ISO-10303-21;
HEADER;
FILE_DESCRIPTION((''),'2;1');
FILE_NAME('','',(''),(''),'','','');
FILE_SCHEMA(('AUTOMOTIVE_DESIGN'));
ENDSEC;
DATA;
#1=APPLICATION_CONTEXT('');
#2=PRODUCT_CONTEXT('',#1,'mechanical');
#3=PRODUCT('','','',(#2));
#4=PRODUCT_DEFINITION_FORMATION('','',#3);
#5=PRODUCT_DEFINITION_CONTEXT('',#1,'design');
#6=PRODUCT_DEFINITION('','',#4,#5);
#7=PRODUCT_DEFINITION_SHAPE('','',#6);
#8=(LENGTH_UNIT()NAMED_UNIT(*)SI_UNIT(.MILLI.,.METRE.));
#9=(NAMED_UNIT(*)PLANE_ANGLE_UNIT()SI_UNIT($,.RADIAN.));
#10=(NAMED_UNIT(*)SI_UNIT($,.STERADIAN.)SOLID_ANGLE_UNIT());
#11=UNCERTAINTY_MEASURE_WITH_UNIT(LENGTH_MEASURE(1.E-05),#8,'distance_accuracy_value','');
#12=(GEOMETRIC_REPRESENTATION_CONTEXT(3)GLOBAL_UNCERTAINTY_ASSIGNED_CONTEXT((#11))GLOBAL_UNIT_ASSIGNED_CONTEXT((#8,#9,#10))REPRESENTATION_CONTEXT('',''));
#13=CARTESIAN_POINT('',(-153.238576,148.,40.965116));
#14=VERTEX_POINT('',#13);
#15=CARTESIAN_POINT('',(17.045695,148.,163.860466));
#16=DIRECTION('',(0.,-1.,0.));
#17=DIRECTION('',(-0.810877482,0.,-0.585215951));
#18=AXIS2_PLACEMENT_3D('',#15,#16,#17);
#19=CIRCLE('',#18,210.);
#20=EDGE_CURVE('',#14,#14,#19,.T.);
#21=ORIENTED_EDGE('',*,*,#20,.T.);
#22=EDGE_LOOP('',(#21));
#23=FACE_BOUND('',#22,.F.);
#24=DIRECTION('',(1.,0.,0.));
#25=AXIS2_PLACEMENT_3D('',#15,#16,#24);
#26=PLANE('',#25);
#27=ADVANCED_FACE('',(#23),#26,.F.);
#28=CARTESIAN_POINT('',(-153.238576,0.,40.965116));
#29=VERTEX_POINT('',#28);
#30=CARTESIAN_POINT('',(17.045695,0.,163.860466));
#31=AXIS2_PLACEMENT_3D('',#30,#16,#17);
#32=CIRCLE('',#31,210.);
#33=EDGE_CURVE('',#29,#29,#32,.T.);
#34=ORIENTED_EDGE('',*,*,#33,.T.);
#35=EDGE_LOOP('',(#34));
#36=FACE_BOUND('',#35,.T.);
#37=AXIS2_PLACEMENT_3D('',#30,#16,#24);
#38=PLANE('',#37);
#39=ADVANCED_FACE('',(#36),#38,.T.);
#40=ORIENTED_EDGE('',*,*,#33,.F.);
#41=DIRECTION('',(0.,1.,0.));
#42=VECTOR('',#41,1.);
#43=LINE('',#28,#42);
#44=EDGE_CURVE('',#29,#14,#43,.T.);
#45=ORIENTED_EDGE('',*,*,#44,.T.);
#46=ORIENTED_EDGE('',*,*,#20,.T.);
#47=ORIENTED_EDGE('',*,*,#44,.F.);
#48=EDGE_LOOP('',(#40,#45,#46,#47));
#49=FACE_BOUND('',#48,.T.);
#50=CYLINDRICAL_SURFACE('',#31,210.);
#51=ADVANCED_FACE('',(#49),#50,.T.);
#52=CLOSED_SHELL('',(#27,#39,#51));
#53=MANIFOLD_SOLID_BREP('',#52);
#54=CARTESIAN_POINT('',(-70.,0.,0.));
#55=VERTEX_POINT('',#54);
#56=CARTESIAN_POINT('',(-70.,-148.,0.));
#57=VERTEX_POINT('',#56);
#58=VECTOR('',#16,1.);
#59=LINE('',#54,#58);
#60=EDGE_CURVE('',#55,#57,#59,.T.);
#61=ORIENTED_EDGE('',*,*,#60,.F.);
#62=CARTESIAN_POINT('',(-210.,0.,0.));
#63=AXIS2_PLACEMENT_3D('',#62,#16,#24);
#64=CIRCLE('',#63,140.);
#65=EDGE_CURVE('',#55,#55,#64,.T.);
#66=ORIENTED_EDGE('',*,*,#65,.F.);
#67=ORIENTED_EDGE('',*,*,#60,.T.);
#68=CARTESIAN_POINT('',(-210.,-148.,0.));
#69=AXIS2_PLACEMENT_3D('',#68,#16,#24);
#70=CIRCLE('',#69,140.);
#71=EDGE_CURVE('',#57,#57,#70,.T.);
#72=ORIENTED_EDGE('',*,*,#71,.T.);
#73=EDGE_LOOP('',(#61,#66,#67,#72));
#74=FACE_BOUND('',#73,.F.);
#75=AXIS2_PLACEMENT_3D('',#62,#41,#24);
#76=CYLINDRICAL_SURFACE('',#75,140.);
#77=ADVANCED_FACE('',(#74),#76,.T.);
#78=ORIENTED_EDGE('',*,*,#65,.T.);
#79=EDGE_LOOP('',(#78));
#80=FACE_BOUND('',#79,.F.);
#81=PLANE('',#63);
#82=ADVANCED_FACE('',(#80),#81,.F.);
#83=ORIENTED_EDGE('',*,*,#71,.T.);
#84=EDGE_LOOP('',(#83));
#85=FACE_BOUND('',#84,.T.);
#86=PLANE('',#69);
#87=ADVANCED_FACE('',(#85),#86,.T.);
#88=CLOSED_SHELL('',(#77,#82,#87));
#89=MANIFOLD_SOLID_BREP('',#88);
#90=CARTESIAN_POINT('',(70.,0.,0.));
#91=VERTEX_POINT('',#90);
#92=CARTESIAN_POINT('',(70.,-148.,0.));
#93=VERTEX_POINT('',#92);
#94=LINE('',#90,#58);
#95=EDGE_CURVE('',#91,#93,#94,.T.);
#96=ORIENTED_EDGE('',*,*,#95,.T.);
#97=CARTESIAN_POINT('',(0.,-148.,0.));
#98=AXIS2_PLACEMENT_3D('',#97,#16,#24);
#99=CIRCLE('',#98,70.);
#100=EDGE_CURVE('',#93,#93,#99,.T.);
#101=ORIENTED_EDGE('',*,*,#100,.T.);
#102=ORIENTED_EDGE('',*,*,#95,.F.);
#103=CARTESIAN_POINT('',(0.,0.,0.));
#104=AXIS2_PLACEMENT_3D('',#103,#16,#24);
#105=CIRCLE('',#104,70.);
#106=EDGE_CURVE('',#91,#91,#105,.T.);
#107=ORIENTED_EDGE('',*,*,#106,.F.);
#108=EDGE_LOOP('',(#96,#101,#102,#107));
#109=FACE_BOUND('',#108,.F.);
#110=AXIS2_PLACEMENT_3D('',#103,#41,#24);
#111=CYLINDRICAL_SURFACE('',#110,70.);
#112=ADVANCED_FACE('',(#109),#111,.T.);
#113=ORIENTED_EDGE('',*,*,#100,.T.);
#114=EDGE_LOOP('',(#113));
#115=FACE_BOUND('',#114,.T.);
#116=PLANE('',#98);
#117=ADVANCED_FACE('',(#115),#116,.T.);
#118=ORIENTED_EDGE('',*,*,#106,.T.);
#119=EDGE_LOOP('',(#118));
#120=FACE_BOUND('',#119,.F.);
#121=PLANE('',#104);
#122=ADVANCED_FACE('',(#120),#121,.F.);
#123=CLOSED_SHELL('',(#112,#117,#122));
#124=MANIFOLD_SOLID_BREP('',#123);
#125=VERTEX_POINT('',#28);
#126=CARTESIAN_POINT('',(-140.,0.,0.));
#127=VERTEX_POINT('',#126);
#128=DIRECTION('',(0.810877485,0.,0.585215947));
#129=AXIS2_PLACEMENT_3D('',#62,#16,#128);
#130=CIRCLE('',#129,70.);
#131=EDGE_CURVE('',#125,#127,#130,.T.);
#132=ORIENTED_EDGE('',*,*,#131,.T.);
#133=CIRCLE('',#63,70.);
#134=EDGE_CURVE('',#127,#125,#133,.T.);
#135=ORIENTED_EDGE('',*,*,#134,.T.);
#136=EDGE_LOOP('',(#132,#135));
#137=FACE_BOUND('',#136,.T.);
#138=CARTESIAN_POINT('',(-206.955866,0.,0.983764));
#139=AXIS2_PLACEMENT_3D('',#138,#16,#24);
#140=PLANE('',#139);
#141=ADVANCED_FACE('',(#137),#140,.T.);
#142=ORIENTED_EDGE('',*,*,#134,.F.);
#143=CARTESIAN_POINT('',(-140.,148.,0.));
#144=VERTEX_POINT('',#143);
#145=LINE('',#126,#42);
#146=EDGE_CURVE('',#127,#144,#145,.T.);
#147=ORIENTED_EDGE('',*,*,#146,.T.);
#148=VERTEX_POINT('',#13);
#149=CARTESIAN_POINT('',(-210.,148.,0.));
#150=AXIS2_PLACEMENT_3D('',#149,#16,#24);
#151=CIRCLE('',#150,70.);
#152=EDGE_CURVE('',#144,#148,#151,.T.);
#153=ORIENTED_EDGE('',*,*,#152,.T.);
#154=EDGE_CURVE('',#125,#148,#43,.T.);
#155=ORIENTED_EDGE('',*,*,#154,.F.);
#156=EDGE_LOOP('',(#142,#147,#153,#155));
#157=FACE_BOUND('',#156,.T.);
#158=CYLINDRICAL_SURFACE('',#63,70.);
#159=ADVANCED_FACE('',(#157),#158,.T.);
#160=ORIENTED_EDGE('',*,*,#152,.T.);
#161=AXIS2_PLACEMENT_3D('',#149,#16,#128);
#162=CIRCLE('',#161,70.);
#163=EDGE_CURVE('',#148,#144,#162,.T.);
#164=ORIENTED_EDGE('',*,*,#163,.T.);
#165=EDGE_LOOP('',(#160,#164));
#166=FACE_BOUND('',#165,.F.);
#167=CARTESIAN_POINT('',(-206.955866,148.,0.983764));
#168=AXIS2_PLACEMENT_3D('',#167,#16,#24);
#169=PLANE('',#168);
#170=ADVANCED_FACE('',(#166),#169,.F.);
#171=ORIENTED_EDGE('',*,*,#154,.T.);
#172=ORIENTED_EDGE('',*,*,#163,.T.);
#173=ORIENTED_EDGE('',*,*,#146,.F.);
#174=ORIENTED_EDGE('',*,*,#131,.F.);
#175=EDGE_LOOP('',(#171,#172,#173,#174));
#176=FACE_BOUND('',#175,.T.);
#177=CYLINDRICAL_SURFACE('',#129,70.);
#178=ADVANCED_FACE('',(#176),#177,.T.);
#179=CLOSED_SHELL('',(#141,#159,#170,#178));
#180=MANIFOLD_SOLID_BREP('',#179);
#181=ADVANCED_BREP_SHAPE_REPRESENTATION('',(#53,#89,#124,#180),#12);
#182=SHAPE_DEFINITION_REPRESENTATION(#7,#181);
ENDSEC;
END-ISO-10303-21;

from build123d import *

# Parameters (mm, degrees)
F0_R     = 70
F1_DEPTH = 148
F2_R     = 140
F3_DEPTH = 148
F5_DEPTH = 148


# Not quite as in the source:
# - a feature of the source that left no trace in its solid (it failed there, or was rolled back) is left out


with BuildPart() as f1:
    # F0 (on Front) → F1 (new body)
    with BuildSketch(Plane.XZ):
        Circle(F0_R)
    extrude(amount=F1_DEPTH)


with BuildPart() as f3:
    # F2 (on Front) → F3 (new body)
    with BuildSketch(Plane.XZ):
        with Locations((-210, 0)):
            Circle(F2_R)
    extrude(amount=F3_DEPTH)


with BuildPart() as f5:
    # F4 (on Front) → F5 (new body)
    with BuildSketch(Plane.XZ):
        with BuildLine():
            ThreePointArc((-153.2385760506, 40.9651162727), (-276.6081814662, -21.5255699523), (-140, 0))
            ThreePointArc((-140, 0), (-143.3918185338, 21.5255699523), (-153.2385760506, 40.9651162727))
        make_face()
    extrude(amount=-F5_DEPTH)


with BuildPart() as f5b:
    # F4 (on Front) → F5, piece 2 (new body)
    with BuildSketch(Plane.XZ):
        with BuildLine():
            ThreePointArc((227.0456952089, 163.8604659066), (-47.5310151267, 363.6850101504), (-153.2385760506, 40.9651162727))
            ThreePointArc((-153.2385760506, 40.9651162727), (81.6224055444, -35.9640783372), (227.0456952089, 163.8604659066))
        make_face()
    extrude(amount=-F5_DEPTH)


solid = Compound([f1.part, f3.part, f5.part, f5b.part])
